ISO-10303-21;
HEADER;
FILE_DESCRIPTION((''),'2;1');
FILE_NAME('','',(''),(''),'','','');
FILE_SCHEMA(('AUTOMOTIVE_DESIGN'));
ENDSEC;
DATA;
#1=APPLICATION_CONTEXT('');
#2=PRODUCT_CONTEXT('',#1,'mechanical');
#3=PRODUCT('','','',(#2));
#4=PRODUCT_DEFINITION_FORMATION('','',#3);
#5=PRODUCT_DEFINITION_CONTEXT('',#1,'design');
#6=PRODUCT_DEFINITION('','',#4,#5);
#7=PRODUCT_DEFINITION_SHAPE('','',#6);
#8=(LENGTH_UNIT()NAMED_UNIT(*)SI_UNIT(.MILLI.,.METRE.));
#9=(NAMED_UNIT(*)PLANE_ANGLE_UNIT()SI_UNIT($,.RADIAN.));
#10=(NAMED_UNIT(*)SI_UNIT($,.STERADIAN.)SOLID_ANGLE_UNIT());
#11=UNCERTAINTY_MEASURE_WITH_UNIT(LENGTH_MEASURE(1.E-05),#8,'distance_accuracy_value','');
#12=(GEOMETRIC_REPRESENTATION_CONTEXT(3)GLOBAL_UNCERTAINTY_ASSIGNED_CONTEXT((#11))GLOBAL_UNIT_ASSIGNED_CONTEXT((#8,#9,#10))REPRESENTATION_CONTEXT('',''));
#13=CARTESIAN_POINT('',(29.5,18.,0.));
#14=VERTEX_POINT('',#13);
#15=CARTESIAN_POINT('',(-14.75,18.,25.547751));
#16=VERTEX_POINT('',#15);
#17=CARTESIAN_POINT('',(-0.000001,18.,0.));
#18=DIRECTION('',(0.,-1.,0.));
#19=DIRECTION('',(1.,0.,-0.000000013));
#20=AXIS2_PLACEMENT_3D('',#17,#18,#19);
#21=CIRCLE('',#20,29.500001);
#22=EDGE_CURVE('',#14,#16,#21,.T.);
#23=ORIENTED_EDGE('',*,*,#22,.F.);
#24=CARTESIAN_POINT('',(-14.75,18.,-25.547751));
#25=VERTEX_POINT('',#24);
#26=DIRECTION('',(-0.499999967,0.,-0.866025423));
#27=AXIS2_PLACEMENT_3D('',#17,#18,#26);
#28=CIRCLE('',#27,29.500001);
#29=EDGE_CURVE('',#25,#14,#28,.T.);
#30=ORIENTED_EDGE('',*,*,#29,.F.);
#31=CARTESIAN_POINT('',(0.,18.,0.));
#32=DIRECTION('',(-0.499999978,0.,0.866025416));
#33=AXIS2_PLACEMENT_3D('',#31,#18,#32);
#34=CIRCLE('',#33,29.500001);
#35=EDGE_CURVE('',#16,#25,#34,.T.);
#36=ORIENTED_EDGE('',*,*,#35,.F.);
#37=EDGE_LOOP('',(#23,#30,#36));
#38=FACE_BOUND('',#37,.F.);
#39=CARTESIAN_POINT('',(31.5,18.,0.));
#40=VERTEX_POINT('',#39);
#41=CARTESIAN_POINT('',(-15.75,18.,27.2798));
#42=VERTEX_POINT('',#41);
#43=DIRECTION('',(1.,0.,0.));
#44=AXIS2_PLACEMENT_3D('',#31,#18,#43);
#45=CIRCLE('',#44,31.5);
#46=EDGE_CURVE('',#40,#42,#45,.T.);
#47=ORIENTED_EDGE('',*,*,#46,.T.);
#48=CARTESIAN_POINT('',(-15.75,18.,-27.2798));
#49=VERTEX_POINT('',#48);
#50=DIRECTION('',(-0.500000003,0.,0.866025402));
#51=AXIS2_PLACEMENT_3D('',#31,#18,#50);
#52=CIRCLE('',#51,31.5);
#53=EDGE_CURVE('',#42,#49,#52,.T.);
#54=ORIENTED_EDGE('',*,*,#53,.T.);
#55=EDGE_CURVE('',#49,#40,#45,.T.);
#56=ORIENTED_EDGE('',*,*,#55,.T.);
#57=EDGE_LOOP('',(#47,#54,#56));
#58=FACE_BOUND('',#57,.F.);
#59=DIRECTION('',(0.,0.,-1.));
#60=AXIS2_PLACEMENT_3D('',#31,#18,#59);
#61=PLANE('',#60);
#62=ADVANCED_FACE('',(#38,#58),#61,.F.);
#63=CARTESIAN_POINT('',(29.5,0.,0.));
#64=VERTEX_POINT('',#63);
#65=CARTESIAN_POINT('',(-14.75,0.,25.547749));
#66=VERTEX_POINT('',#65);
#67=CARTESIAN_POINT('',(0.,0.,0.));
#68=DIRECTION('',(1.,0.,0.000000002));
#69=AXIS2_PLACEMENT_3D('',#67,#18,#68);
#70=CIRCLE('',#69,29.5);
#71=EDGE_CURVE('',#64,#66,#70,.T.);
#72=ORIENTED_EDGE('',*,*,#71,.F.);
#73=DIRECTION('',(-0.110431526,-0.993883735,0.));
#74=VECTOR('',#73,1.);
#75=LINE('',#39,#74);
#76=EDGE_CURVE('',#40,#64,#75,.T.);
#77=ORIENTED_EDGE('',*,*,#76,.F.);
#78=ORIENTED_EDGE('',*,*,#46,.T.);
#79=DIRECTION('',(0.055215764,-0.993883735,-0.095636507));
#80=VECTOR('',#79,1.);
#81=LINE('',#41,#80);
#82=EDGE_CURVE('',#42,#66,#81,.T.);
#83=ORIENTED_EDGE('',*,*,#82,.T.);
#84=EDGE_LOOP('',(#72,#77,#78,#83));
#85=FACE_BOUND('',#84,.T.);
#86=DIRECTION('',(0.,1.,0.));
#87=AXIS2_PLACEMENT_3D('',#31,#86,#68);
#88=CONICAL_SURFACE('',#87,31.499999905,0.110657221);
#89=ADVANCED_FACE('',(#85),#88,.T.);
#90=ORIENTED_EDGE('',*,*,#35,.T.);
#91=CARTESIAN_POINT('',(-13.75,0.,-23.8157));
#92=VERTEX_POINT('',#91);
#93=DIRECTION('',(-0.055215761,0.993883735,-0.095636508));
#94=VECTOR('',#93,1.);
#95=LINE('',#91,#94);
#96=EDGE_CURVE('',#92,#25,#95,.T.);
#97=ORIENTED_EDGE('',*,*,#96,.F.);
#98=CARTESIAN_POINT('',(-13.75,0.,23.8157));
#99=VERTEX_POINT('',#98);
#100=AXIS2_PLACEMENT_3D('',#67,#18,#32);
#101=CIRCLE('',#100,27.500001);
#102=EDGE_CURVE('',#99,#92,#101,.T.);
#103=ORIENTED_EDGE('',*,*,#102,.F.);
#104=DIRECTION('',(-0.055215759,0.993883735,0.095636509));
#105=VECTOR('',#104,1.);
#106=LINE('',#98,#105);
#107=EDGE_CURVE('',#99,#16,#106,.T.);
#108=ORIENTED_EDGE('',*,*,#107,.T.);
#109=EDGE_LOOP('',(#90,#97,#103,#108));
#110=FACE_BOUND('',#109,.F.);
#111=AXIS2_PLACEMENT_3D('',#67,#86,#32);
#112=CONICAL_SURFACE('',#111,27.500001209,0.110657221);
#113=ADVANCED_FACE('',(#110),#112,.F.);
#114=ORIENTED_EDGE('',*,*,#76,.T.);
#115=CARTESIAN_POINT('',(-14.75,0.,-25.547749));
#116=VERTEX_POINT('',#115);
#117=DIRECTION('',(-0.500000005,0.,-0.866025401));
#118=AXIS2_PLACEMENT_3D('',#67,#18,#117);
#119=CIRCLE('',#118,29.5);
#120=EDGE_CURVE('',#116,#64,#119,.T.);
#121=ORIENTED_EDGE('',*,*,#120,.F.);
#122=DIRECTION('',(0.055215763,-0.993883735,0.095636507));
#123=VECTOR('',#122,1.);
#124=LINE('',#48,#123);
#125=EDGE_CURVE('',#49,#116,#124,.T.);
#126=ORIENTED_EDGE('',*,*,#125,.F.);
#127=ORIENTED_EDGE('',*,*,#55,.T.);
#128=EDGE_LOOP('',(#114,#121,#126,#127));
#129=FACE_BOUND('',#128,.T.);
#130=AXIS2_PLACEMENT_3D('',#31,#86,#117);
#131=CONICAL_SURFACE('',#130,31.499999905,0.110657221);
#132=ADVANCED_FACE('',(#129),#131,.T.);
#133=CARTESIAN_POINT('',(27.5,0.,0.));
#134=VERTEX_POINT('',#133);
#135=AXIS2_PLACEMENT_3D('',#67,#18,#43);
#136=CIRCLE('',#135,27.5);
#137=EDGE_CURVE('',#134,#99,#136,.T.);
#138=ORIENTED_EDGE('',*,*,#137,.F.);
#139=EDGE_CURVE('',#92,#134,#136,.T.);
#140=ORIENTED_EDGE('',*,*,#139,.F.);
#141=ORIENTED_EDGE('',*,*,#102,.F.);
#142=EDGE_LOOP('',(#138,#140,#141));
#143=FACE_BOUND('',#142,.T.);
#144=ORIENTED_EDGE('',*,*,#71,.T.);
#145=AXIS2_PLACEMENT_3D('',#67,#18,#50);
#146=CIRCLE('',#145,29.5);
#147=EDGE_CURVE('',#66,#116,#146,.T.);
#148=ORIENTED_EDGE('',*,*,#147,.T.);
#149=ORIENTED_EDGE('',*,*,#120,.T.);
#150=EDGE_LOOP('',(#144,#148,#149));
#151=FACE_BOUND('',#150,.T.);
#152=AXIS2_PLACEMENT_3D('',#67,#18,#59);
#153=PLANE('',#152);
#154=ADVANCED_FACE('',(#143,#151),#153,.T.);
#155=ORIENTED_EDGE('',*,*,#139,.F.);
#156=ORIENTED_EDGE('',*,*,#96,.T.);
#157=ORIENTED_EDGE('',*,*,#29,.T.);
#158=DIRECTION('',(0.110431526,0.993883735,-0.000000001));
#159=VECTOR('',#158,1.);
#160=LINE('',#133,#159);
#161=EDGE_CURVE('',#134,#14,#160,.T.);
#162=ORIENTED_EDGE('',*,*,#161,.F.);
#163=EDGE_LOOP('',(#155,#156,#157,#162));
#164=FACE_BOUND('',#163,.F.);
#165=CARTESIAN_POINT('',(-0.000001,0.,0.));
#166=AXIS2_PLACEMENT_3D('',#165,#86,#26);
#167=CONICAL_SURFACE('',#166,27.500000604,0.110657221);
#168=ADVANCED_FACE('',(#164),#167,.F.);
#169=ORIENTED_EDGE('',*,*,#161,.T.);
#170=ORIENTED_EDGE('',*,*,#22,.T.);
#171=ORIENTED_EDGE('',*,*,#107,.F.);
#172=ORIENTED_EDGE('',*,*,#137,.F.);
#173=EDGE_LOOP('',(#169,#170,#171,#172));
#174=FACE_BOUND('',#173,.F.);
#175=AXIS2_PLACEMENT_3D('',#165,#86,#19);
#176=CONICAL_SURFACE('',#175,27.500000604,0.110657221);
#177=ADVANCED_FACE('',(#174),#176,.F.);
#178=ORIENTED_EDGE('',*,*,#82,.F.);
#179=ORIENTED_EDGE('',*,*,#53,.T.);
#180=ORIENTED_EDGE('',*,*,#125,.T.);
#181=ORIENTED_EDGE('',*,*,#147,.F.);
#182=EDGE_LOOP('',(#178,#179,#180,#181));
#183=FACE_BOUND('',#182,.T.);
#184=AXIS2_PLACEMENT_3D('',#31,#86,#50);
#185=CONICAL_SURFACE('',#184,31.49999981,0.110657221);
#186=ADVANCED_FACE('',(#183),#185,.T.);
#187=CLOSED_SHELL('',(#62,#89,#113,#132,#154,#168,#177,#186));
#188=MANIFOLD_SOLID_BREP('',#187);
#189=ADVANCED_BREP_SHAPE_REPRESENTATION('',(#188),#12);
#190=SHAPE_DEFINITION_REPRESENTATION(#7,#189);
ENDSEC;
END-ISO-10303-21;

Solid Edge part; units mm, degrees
sketch "Sketch1" plane through (0, 0, 0) normal (0, -1, 0) x (1, 0, 0)
  circle A0 centre (0, 0) radius 31.5
  dimension "D1" = 63
extrude "Protrusion1" add sketch "Sketch1" against normal blind 18
sketch "Sketch2" plane through (0, 0, 0) normal (0, -1, 0) x (1, 0, 0)
  circle A0 centre (0, 0) radius 27.5
  dimension "D1" = 55
extrude "Cutout1" cut sketch "Sketch2" against normal through all
sketch "Sketch3" plane through (0, 0, 0) normal (0, 0, 1) x (1, 0, 0)
  line L0 (27.5, 0) -> (29.5, 18)
  line L1 (29.5, 18) -> (27.5, 18)
  line L2 (27.5, 18) -> (27.5, 0)
sketch3d "SweptCutout_4 path"
  arc A0 (27.5, 18, 0) -> (-13.75, 18, 23.8157) centre (0, 18, 0)
  arc A1 (-13.75, 18, 23.8157) -> (-13.75, 18, -23.8157) centre (0, 18, 0)
  arc A2 (-13.75, 18, -23.8157) -> (27.5, 18, 0) centre (0, 18, 0)
sweep "SweptCutout_4" cut profiles "Sketch3" path "SweptCutout_4 path"
sketch "Sketch4" plane through (0, 0, 0) normal (0, 0, 1) x (1, 0, 0)
  line L0 (31.5, 18) -> (29.5, 0)
  line L1 (29.5, 0) -> (31.5, 0)
  line L2 (31.5, 0) -> (31.5, 18)
  dimension "D1" = 2
sketch3d "SweptCutout_5 path"
  arc A0 (31.5, 0, 0) -> (-15.75, 0, 27.2798) centre (0, 0, 0)
  arc A1 (-15.75, 0, 27.2798) -> (-15.75, 0, -27.2798) centre (0, 0, 0)
  arc A2 (-15.75, 0, -27.2798) -> (31.5, 0, 0) centre (0, 0, 0)
sweep "SweptCutout_5" cut profiles "Sketch4" path "SweptCutout_5 path"
properties material "Aluminum, 1060"
